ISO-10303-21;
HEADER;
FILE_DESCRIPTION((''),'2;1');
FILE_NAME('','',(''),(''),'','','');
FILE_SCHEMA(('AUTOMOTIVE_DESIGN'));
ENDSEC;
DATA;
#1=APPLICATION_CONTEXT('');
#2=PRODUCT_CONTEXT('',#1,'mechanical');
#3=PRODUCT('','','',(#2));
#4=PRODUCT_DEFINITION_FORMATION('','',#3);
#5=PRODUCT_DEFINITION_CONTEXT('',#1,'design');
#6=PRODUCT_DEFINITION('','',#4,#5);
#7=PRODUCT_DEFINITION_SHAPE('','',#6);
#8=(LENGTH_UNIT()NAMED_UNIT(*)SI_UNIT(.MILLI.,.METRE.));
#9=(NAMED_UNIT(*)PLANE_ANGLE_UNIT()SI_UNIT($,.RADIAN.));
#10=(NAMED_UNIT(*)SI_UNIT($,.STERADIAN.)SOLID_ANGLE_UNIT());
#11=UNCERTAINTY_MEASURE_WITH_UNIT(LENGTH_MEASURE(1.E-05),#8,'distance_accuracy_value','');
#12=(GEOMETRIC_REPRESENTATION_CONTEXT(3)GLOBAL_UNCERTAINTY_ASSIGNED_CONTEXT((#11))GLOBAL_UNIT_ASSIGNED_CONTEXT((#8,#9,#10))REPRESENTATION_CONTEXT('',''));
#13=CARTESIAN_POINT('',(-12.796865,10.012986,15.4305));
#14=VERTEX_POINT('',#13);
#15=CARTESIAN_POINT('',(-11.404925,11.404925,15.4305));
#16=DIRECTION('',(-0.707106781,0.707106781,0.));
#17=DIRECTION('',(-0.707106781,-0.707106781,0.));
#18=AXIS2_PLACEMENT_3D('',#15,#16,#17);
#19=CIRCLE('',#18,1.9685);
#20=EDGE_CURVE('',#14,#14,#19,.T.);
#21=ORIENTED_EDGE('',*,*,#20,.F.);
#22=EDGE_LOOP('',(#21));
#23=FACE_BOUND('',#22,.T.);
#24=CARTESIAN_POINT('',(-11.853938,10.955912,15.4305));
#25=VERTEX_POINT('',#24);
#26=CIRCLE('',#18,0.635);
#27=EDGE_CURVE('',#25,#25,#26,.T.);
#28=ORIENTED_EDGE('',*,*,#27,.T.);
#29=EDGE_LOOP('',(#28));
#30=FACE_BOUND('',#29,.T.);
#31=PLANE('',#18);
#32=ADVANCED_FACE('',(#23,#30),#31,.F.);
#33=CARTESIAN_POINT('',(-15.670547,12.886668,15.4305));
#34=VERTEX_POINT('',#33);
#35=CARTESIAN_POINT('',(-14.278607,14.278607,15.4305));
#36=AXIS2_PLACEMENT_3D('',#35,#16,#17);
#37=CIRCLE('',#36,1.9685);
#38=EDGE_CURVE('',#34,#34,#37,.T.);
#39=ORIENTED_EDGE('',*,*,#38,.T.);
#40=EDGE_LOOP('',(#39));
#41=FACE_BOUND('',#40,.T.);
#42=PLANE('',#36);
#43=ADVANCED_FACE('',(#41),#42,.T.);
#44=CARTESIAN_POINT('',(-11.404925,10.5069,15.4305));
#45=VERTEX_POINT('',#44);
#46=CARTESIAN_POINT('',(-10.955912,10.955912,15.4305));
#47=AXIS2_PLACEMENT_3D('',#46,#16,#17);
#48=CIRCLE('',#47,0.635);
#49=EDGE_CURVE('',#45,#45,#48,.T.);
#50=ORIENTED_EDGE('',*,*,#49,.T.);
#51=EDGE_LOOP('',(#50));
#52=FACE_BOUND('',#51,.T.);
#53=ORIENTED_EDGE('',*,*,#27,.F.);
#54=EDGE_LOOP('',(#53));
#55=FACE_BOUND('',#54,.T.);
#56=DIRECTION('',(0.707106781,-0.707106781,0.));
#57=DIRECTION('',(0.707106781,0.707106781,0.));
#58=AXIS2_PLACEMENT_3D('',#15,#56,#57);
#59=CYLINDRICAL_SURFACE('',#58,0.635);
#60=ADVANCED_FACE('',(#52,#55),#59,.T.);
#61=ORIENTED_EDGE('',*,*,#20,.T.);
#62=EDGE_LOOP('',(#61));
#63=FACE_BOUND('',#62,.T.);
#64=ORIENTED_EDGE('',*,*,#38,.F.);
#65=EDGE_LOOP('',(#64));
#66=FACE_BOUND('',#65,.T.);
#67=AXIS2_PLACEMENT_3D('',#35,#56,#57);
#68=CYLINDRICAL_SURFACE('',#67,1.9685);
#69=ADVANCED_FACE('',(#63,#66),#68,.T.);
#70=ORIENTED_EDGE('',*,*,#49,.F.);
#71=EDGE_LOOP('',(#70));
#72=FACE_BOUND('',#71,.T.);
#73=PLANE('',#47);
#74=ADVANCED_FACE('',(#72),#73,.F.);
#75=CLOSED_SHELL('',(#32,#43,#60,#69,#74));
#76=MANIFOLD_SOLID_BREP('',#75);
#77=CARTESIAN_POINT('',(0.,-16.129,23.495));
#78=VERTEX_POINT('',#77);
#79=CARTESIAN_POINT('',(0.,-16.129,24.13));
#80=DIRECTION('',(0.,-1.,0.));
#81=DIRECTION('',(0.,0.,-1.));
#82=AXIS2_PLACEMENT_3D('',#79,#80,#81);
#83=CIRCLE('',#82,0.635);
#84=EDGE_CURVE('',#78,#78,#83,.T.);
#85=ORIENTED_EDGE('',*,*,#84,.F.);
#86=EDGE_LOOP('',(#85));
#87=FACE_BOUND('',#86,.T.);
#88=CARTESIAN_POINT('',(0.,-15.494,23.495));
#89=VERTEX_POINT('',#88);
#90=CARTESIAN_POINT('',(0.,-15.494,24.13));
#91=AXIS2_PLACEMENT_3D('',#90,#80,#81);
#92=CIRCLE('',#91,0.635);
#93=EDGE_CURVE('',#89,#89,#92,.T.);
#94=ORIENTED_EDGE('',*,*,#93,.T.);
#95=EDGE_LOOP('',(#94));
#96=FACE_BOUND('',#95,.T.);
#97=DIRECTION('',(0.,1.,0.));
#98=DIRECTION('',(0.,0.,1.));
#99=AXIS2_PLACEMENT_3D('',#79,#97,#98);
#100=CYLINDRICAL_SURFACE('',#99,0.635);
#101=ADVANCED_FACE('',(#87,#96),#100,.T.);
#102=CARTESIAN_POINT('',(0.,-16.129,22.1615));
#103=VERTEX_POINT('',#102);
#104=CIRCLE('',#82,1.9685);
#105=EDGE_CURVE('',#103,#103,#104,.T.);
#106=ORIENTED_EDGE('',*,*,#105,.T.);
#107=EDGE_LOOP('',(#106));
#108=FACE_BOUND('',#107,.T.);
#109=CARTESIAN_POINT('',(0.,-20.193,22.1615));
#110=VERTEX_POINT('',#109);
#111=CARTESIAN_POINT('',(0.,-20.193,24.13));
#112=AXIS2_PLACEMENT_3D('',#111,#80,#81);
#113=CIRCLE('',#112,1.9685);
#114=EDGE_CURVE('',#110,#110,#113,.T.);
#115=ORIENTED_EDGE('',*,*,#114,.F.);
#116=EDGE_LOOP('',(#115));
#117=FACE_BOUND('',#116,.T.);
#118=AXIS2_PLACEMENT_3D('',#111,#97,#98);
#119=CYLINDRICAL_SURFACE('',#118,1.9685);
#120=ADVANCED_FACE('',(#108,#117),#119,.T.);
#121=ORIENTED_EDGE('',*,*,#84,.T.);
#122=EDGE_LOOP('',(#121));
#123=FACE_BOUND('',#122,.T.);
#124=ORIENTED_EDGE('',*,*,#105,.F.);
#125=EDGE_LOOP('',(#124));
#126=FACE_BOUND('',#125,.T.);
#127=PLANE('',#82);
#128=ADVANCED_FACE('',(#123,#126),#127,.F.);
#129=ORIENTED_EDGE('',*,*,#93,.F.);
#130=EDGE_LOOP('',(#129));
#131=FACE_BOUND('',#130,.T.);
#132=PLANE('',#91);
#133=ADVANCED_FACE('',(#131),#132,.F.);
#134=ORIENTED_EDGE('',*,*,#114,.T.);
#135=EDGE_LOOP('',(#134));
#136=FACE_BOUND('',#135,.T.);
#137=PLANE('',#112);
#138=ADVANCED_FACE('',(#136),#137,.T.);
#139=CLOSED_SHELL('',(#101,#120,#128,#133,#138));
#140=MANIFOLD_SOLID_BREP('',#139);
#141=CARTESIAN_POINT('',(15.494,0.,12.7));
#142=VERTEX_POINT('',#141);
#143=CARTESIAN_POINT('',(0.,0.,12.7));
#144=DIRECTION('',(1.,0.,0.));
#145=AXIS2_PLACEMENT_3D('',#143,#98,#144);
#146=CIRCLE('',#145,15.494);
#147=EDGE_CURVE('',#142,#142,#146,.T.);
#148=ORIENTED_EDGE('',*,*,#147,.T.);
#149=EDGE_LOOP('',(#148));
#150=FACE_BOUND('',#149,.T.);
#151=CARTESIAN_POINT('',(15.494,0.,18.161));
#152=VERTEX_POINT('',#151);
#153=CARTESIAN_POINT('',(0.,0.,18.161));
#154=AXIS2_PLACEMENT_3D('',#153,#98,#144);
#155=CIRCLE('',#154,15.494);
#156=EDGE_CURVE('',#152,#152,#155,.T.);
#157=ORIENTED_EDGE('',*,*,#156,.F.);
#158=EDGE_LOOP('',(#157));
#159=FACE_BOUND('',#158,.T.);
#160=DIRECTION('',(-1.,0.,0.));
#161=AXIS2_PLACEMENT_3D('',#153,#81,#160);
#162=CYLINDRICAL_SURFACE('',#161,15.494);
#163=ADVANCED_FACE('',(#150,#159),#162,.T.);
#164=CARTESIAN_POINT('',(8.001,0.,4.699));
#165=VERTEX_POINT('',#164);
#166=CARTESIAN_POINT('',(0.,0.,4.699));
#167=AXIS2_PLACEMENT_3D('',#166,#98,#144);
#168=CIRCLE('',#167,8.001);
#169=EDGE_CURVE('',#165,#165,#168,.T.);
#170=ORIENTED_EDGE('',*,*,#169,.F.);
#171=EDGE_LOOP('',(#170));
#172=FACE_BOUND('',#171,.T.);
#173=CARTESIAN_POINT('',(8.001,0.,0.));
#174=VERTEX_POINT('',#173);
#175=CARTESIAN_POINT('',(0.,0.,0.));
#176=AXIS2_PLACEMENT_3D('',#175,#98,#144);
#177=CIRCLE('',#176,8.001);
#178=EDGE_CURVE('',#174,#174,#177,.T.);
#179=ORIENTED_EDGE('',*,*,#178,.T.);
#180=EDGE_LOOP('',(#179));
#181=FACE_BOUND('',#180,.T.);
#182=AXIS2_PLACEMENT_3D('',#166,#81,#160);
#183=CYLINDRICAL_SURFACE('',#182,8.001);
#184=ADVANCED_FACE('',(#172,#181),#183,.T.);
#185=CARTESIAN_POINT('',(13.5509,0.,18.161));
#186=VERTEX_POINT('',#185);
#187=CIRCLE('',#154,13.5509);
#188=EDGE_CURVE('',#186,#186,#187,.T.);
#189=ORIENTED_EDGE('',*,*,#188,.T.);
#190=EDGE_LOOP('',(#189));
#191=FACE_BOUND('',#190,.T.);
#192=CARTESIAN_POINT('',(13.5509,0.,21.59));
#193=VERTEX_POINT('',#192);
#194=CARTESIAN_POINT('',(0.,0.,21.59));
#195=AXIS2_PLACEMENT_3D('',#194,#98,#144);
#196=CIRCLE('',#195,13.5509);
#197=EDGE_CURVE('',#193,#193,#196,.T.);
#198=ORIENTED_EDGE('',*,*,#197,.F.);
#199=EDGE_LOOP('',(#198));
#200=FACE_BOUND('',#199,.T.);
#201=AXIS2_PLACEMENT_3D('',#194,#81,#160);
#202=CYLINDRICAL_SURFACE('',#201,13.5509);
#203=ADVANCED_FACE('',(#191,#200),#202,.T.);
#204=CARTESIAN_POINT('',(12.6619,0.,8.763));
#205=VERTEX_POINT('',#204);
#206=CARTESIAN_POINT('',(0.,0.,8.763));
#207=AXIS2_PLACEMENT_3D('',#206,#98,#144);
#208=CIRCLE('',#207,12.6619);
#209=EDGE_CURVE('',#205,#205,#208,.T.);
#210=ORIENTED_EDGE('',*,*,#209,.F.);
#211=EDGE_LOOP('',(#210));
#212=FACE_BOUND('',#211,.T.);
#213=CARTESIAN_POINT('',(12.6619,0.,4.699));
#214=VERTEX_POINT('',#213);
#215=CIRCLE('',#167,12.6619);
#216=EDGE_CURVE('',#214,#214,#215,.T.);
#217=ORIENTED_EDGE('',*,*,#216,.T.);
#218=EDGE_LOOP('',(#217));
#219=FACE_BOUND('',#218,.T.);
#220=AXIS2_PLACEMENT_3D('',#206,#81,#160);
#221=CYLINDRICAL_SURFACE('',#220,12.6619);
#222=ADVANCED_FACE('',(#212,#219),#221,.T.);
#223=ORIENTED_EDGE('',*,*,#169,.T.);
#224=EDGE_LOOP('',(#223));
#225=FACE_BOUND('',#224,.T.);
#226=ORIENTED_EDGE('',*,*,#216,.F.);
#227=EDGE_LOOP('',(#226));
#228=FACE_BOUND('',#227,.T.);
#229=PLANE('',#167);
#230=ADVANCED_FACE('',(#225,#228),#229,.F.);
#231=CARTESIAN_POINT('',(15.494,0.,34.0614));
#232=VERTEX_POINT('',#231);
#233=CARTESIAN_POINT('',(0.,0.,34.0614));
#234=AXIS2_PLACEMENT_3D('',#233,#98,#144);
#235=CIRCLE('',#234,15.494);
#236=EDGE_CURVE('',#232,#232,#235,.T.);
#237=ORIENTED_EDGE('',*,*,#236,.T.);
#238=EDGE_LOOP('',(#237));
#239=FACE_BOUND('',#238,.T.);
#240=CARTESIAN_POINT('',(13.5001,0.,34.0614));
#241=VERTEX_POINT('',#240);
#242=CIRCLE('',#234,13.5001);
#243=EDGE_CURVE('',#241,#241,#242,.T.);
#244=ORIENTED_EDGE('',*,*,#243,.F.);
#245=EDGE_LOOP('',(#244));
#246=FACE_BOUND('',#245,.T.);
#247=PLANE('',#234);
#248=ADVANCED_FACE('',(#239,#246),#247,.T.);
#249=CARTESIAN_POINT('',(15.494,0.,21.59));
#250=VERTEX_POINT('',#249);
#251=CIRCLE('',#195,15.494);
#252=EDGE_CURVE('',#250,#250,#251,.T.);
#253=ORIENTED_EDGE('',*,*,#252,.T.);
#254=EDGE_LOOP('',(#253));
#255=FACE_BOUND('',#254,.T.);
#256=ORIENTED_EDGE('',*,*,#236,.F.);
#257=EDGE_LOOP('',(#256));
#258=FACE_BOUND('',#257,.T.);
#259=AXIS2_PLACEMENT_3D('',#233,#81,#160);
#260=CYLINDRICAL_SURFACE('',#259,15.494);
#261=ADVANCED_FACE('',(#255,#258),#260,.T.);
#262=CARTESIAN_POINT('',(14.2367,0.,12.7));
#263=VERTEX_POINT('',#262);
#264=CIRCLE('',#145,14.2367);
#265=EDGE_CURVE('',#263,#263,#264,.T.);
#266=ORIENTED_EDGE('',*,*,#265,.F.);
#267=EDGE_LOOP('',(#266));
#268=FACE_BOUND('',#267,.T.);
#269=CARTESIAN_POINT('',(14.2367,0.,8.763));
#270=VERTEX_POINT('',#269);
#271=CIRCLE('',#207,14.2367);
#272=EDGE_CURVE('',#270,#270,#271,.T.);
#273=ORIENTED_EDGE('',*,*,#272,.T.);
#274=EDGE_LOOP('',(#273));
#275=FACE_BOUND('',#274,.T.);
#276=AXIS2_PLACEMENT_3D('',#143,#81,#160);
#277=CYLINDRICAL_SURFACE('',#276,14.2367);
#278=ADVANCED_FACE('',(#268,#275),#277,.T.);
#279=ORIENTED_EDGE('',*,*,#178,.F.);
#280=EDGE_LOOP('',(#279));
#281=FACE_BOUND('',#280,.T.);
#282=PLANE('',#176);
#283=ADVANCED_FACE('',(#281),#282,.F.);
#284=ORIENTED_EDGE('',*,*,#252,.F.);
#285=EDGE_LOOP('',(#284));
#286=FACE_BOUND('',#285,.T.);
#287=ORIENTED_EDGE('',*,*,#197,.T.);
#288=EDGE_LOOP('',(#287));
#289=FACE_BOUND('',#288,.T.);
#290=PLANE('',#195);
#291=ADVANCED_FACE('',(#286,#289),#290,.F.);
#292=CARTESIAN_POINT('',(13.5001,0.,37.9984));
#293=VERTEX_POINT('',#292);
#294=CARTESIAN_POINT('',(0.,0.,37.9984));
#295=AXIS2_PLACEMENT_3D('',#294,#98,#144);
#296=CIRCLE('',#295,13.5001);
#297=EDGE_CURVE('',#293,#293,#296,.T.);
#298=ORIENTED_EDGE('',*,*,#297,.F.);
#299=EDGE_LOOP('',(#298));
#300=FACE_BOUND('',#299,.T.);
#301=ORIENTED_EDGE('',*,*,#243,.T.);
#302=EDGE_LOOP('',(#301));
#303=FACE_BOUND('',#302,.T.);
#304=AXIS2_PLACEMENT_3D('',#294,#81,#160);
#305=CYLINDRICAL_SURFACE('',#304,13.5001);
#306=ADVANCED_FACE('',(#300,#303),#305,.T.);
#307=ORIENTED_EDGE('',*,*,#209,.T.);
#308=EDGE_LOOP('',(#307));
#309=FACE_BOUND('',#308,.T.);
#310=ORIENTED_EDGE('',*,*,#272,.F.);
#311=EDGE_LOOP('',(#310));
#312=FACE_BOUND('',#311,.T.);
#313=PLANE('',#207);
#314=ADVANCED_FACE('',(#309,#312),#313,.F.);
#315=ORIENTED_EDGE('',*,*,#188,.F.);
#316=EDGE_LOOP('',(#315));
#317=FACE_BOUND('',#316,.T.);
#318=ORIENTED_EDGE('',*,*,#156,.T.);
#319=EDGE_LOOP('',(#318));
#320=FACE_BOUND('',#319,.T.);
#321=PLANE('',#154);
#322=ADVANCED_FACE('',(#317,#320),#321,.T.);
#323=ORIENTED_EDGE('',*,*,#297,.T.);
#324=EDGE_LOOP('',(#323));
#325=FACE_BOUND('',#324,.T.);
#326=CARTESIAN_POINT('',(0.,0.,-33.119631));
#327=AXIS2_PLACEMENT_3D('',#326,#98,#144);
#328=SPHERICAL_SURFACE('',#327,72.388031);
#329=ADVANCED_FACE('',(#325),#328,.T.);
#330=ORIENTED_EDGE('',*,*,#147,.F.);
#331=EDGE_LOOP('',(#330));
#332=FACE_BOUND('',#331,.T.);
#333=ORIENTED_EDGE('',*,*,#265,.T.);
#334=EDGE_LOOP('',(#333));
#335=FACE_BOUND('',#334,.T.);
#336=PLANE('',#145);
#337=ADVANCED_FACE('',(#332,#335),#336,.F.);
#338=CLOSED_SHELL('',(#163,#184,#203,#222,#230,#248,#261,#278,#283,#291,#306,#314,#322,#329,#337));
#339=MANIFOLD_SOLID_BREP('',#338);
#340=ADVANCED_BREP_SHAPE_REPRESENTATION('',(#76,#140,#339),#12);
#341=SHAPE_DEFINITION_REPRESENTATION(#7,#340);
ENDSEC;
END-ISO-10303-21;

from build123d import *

# Parameters (mm, degrees)
SKETCH1_R            = 8.001
BOSS_EXTRUDE1_DEPTH  = 4.699
SKETCH2_R            = 12.6619
BOSS_EXTRUDE2_DEPTH  = 4.064
SKETCH3_R            = 14.2367
BOSS_EXTRUDE3_DEPTH  = 3.937
SKETCH4_R            = 15.494
BOSS_EXTRUDE4_DEPTH  = 5.461
SKETCH5_R            = 13.5509
BOSS_EXTRUDE5_DEPTH  = 3.429
SKETCH6_R            = 15.494
BOSS_EXTRUDE6_DEPTH  = 12.4714
SKETCH7_R            = 13.5001
BOSS_EXTRUDE7_DEPTH  = 3.937
SKETCH8_R            = 0.635
BOSS_EXTRUDE8_DEPTH  = 0.635
SKETCH9_R            = 1.9685
BOSS_EXTRUDE9_DEPTH  = 4.064
SKETCH10_R           = 0.635
BOSS_EXTRUDE10_DEPTH = 0.635
SKETCH12_R           = 1.9685
BOSS_EXTRUDE11_DEPTH = 4.064


# Read off the part's stored shape, not the designer's step: Dome1
with BuildPart() as part:
    # Sketch1 → Boss-Extrude1 (new body)
    with BuildSketch(Plane.XY):
        Circle(SKETCH1_R)
    extrude(amount=BOSS_EXTRUDE1_DEPTH)

    # Sketch2 → Boss-Extrude2 (add)
    with BuildSketch(Plane.XY.offset(4.699)):
        Circle(SKETCH2_R)
    extrude(amount=BOSS_EXTRUDE2_DEPTH)

    # Sketch3 → Boss-Extrude3 (add)
    with BuildSketch(Plane.XY.offset(8.763)):
        Circle(SKETCH3_R)
    extrude(amount=BOSS_EXTRUDE3_DEPTH)

    # Sketch4 → Boss-Extrude4 (add)
    with BuildSketch(Plane.XY.offset(12.7)):
        Circle(SKETCH4_R)
    extrude(amount=BOSS_EXTRUDE4_DEPTH)

    # Sketch5 → Boss-Extrude5 (add)
    with BuildSketch(Plane.XY.offset(18.161)):
        Circle(SKETCH5_R)
    extrude(amount=BOSS_EXTRUDE5_DEPTH)

    # Sketch6 → Boss-Extrude6 (add)
    with BuildSketch(Plane.XY.offset(21.59)):
        Circle(SKETCH6_R)
    extrude(amount=BOSS_EXTRUDE6_DEPTH)

    # Sketch7 → Boss-Extrude7 (add)
    with BuildSketch(Plane.XY.offset(34.0614)):
        Circle(SKETCH7_R)
    extrude(amount=BOSS_EXTRUDE7_DEPTH)

    # Dome1 outline → Dome1 (revolve)
    with BuildSketch(Plane.XZ):
        with BuildLine():
            Line((0, 37.9984), (13.500100071, 37.998399986))
            ThreePointArc((13.500100071, 37.998399986), (6.779852542, 38.950200635), (0, 39.2684))
            Line((0, 39.2684), (0, 37.9984))
        make_face()
    revolve(axis=Axis((0, 0, 0), (0, 0, 1)))


with BuildPart() as body_2:
    # Sketch8 → Boss-Extrude8 (new body)
    with BuildSketch(Plane(origin=(0, -15.494, 0), x_dir=(-1, 0, 0), z_dir=(0, -1, 0))):
        with Locations(Location((0, -24.13, 0), (0, 0, 90))):
            Circle(SKETCH8_R)
    extrude(amount=BOSS_EXTRUDE8_DEPTH)

    # Sketch9 → Boss-Extrude9 (add)
    with BuildSketch(Plane.XZ.offset(16.129)):
        with Locations(Location((0, 24.13, 0), (0, 0, 270))):
            Circle(SKETCH9_R)
    extrude(amount=BOSS_EXTRUDE9_DEPTH)


with BuildPart() as body_3:
    # Sketch10 → Boss-Extrude10 (new body)
    with BuildSketch(Plane(origin=(-10.955912468, 10.955912468, 0), x_dir=(0.7071067811865512, 0.7071067811865438, 0), z_dir=(-0.7071067811865438, 0.7071067811865512, 0))):
        with Locations(Location((0, -15.4305, 0), (0, 0, 180))):
            Circle(SKETCH10_R)
    extrude(amount=BOSS_EXTRUDE10_DEPTH)

    # Sketch12 → Boss-Extrude11 (add)
    with BuildSketch(Plane(origin=(-11.404925274, 11.404925274, 0), x_dir=(0, 0, 1), z_dir=(-0.7071067811865438, 0.7071067811865513, 0))):
        with Locations(Location((15.4305, 0, 0), (0, 0, 270))):
            Circle(SKETCH12_R)
    extrude(amount=BOSS_EXTRUDE11_DEPTH)


solid = Compound([part.part, body_2.part, body_3.part])
